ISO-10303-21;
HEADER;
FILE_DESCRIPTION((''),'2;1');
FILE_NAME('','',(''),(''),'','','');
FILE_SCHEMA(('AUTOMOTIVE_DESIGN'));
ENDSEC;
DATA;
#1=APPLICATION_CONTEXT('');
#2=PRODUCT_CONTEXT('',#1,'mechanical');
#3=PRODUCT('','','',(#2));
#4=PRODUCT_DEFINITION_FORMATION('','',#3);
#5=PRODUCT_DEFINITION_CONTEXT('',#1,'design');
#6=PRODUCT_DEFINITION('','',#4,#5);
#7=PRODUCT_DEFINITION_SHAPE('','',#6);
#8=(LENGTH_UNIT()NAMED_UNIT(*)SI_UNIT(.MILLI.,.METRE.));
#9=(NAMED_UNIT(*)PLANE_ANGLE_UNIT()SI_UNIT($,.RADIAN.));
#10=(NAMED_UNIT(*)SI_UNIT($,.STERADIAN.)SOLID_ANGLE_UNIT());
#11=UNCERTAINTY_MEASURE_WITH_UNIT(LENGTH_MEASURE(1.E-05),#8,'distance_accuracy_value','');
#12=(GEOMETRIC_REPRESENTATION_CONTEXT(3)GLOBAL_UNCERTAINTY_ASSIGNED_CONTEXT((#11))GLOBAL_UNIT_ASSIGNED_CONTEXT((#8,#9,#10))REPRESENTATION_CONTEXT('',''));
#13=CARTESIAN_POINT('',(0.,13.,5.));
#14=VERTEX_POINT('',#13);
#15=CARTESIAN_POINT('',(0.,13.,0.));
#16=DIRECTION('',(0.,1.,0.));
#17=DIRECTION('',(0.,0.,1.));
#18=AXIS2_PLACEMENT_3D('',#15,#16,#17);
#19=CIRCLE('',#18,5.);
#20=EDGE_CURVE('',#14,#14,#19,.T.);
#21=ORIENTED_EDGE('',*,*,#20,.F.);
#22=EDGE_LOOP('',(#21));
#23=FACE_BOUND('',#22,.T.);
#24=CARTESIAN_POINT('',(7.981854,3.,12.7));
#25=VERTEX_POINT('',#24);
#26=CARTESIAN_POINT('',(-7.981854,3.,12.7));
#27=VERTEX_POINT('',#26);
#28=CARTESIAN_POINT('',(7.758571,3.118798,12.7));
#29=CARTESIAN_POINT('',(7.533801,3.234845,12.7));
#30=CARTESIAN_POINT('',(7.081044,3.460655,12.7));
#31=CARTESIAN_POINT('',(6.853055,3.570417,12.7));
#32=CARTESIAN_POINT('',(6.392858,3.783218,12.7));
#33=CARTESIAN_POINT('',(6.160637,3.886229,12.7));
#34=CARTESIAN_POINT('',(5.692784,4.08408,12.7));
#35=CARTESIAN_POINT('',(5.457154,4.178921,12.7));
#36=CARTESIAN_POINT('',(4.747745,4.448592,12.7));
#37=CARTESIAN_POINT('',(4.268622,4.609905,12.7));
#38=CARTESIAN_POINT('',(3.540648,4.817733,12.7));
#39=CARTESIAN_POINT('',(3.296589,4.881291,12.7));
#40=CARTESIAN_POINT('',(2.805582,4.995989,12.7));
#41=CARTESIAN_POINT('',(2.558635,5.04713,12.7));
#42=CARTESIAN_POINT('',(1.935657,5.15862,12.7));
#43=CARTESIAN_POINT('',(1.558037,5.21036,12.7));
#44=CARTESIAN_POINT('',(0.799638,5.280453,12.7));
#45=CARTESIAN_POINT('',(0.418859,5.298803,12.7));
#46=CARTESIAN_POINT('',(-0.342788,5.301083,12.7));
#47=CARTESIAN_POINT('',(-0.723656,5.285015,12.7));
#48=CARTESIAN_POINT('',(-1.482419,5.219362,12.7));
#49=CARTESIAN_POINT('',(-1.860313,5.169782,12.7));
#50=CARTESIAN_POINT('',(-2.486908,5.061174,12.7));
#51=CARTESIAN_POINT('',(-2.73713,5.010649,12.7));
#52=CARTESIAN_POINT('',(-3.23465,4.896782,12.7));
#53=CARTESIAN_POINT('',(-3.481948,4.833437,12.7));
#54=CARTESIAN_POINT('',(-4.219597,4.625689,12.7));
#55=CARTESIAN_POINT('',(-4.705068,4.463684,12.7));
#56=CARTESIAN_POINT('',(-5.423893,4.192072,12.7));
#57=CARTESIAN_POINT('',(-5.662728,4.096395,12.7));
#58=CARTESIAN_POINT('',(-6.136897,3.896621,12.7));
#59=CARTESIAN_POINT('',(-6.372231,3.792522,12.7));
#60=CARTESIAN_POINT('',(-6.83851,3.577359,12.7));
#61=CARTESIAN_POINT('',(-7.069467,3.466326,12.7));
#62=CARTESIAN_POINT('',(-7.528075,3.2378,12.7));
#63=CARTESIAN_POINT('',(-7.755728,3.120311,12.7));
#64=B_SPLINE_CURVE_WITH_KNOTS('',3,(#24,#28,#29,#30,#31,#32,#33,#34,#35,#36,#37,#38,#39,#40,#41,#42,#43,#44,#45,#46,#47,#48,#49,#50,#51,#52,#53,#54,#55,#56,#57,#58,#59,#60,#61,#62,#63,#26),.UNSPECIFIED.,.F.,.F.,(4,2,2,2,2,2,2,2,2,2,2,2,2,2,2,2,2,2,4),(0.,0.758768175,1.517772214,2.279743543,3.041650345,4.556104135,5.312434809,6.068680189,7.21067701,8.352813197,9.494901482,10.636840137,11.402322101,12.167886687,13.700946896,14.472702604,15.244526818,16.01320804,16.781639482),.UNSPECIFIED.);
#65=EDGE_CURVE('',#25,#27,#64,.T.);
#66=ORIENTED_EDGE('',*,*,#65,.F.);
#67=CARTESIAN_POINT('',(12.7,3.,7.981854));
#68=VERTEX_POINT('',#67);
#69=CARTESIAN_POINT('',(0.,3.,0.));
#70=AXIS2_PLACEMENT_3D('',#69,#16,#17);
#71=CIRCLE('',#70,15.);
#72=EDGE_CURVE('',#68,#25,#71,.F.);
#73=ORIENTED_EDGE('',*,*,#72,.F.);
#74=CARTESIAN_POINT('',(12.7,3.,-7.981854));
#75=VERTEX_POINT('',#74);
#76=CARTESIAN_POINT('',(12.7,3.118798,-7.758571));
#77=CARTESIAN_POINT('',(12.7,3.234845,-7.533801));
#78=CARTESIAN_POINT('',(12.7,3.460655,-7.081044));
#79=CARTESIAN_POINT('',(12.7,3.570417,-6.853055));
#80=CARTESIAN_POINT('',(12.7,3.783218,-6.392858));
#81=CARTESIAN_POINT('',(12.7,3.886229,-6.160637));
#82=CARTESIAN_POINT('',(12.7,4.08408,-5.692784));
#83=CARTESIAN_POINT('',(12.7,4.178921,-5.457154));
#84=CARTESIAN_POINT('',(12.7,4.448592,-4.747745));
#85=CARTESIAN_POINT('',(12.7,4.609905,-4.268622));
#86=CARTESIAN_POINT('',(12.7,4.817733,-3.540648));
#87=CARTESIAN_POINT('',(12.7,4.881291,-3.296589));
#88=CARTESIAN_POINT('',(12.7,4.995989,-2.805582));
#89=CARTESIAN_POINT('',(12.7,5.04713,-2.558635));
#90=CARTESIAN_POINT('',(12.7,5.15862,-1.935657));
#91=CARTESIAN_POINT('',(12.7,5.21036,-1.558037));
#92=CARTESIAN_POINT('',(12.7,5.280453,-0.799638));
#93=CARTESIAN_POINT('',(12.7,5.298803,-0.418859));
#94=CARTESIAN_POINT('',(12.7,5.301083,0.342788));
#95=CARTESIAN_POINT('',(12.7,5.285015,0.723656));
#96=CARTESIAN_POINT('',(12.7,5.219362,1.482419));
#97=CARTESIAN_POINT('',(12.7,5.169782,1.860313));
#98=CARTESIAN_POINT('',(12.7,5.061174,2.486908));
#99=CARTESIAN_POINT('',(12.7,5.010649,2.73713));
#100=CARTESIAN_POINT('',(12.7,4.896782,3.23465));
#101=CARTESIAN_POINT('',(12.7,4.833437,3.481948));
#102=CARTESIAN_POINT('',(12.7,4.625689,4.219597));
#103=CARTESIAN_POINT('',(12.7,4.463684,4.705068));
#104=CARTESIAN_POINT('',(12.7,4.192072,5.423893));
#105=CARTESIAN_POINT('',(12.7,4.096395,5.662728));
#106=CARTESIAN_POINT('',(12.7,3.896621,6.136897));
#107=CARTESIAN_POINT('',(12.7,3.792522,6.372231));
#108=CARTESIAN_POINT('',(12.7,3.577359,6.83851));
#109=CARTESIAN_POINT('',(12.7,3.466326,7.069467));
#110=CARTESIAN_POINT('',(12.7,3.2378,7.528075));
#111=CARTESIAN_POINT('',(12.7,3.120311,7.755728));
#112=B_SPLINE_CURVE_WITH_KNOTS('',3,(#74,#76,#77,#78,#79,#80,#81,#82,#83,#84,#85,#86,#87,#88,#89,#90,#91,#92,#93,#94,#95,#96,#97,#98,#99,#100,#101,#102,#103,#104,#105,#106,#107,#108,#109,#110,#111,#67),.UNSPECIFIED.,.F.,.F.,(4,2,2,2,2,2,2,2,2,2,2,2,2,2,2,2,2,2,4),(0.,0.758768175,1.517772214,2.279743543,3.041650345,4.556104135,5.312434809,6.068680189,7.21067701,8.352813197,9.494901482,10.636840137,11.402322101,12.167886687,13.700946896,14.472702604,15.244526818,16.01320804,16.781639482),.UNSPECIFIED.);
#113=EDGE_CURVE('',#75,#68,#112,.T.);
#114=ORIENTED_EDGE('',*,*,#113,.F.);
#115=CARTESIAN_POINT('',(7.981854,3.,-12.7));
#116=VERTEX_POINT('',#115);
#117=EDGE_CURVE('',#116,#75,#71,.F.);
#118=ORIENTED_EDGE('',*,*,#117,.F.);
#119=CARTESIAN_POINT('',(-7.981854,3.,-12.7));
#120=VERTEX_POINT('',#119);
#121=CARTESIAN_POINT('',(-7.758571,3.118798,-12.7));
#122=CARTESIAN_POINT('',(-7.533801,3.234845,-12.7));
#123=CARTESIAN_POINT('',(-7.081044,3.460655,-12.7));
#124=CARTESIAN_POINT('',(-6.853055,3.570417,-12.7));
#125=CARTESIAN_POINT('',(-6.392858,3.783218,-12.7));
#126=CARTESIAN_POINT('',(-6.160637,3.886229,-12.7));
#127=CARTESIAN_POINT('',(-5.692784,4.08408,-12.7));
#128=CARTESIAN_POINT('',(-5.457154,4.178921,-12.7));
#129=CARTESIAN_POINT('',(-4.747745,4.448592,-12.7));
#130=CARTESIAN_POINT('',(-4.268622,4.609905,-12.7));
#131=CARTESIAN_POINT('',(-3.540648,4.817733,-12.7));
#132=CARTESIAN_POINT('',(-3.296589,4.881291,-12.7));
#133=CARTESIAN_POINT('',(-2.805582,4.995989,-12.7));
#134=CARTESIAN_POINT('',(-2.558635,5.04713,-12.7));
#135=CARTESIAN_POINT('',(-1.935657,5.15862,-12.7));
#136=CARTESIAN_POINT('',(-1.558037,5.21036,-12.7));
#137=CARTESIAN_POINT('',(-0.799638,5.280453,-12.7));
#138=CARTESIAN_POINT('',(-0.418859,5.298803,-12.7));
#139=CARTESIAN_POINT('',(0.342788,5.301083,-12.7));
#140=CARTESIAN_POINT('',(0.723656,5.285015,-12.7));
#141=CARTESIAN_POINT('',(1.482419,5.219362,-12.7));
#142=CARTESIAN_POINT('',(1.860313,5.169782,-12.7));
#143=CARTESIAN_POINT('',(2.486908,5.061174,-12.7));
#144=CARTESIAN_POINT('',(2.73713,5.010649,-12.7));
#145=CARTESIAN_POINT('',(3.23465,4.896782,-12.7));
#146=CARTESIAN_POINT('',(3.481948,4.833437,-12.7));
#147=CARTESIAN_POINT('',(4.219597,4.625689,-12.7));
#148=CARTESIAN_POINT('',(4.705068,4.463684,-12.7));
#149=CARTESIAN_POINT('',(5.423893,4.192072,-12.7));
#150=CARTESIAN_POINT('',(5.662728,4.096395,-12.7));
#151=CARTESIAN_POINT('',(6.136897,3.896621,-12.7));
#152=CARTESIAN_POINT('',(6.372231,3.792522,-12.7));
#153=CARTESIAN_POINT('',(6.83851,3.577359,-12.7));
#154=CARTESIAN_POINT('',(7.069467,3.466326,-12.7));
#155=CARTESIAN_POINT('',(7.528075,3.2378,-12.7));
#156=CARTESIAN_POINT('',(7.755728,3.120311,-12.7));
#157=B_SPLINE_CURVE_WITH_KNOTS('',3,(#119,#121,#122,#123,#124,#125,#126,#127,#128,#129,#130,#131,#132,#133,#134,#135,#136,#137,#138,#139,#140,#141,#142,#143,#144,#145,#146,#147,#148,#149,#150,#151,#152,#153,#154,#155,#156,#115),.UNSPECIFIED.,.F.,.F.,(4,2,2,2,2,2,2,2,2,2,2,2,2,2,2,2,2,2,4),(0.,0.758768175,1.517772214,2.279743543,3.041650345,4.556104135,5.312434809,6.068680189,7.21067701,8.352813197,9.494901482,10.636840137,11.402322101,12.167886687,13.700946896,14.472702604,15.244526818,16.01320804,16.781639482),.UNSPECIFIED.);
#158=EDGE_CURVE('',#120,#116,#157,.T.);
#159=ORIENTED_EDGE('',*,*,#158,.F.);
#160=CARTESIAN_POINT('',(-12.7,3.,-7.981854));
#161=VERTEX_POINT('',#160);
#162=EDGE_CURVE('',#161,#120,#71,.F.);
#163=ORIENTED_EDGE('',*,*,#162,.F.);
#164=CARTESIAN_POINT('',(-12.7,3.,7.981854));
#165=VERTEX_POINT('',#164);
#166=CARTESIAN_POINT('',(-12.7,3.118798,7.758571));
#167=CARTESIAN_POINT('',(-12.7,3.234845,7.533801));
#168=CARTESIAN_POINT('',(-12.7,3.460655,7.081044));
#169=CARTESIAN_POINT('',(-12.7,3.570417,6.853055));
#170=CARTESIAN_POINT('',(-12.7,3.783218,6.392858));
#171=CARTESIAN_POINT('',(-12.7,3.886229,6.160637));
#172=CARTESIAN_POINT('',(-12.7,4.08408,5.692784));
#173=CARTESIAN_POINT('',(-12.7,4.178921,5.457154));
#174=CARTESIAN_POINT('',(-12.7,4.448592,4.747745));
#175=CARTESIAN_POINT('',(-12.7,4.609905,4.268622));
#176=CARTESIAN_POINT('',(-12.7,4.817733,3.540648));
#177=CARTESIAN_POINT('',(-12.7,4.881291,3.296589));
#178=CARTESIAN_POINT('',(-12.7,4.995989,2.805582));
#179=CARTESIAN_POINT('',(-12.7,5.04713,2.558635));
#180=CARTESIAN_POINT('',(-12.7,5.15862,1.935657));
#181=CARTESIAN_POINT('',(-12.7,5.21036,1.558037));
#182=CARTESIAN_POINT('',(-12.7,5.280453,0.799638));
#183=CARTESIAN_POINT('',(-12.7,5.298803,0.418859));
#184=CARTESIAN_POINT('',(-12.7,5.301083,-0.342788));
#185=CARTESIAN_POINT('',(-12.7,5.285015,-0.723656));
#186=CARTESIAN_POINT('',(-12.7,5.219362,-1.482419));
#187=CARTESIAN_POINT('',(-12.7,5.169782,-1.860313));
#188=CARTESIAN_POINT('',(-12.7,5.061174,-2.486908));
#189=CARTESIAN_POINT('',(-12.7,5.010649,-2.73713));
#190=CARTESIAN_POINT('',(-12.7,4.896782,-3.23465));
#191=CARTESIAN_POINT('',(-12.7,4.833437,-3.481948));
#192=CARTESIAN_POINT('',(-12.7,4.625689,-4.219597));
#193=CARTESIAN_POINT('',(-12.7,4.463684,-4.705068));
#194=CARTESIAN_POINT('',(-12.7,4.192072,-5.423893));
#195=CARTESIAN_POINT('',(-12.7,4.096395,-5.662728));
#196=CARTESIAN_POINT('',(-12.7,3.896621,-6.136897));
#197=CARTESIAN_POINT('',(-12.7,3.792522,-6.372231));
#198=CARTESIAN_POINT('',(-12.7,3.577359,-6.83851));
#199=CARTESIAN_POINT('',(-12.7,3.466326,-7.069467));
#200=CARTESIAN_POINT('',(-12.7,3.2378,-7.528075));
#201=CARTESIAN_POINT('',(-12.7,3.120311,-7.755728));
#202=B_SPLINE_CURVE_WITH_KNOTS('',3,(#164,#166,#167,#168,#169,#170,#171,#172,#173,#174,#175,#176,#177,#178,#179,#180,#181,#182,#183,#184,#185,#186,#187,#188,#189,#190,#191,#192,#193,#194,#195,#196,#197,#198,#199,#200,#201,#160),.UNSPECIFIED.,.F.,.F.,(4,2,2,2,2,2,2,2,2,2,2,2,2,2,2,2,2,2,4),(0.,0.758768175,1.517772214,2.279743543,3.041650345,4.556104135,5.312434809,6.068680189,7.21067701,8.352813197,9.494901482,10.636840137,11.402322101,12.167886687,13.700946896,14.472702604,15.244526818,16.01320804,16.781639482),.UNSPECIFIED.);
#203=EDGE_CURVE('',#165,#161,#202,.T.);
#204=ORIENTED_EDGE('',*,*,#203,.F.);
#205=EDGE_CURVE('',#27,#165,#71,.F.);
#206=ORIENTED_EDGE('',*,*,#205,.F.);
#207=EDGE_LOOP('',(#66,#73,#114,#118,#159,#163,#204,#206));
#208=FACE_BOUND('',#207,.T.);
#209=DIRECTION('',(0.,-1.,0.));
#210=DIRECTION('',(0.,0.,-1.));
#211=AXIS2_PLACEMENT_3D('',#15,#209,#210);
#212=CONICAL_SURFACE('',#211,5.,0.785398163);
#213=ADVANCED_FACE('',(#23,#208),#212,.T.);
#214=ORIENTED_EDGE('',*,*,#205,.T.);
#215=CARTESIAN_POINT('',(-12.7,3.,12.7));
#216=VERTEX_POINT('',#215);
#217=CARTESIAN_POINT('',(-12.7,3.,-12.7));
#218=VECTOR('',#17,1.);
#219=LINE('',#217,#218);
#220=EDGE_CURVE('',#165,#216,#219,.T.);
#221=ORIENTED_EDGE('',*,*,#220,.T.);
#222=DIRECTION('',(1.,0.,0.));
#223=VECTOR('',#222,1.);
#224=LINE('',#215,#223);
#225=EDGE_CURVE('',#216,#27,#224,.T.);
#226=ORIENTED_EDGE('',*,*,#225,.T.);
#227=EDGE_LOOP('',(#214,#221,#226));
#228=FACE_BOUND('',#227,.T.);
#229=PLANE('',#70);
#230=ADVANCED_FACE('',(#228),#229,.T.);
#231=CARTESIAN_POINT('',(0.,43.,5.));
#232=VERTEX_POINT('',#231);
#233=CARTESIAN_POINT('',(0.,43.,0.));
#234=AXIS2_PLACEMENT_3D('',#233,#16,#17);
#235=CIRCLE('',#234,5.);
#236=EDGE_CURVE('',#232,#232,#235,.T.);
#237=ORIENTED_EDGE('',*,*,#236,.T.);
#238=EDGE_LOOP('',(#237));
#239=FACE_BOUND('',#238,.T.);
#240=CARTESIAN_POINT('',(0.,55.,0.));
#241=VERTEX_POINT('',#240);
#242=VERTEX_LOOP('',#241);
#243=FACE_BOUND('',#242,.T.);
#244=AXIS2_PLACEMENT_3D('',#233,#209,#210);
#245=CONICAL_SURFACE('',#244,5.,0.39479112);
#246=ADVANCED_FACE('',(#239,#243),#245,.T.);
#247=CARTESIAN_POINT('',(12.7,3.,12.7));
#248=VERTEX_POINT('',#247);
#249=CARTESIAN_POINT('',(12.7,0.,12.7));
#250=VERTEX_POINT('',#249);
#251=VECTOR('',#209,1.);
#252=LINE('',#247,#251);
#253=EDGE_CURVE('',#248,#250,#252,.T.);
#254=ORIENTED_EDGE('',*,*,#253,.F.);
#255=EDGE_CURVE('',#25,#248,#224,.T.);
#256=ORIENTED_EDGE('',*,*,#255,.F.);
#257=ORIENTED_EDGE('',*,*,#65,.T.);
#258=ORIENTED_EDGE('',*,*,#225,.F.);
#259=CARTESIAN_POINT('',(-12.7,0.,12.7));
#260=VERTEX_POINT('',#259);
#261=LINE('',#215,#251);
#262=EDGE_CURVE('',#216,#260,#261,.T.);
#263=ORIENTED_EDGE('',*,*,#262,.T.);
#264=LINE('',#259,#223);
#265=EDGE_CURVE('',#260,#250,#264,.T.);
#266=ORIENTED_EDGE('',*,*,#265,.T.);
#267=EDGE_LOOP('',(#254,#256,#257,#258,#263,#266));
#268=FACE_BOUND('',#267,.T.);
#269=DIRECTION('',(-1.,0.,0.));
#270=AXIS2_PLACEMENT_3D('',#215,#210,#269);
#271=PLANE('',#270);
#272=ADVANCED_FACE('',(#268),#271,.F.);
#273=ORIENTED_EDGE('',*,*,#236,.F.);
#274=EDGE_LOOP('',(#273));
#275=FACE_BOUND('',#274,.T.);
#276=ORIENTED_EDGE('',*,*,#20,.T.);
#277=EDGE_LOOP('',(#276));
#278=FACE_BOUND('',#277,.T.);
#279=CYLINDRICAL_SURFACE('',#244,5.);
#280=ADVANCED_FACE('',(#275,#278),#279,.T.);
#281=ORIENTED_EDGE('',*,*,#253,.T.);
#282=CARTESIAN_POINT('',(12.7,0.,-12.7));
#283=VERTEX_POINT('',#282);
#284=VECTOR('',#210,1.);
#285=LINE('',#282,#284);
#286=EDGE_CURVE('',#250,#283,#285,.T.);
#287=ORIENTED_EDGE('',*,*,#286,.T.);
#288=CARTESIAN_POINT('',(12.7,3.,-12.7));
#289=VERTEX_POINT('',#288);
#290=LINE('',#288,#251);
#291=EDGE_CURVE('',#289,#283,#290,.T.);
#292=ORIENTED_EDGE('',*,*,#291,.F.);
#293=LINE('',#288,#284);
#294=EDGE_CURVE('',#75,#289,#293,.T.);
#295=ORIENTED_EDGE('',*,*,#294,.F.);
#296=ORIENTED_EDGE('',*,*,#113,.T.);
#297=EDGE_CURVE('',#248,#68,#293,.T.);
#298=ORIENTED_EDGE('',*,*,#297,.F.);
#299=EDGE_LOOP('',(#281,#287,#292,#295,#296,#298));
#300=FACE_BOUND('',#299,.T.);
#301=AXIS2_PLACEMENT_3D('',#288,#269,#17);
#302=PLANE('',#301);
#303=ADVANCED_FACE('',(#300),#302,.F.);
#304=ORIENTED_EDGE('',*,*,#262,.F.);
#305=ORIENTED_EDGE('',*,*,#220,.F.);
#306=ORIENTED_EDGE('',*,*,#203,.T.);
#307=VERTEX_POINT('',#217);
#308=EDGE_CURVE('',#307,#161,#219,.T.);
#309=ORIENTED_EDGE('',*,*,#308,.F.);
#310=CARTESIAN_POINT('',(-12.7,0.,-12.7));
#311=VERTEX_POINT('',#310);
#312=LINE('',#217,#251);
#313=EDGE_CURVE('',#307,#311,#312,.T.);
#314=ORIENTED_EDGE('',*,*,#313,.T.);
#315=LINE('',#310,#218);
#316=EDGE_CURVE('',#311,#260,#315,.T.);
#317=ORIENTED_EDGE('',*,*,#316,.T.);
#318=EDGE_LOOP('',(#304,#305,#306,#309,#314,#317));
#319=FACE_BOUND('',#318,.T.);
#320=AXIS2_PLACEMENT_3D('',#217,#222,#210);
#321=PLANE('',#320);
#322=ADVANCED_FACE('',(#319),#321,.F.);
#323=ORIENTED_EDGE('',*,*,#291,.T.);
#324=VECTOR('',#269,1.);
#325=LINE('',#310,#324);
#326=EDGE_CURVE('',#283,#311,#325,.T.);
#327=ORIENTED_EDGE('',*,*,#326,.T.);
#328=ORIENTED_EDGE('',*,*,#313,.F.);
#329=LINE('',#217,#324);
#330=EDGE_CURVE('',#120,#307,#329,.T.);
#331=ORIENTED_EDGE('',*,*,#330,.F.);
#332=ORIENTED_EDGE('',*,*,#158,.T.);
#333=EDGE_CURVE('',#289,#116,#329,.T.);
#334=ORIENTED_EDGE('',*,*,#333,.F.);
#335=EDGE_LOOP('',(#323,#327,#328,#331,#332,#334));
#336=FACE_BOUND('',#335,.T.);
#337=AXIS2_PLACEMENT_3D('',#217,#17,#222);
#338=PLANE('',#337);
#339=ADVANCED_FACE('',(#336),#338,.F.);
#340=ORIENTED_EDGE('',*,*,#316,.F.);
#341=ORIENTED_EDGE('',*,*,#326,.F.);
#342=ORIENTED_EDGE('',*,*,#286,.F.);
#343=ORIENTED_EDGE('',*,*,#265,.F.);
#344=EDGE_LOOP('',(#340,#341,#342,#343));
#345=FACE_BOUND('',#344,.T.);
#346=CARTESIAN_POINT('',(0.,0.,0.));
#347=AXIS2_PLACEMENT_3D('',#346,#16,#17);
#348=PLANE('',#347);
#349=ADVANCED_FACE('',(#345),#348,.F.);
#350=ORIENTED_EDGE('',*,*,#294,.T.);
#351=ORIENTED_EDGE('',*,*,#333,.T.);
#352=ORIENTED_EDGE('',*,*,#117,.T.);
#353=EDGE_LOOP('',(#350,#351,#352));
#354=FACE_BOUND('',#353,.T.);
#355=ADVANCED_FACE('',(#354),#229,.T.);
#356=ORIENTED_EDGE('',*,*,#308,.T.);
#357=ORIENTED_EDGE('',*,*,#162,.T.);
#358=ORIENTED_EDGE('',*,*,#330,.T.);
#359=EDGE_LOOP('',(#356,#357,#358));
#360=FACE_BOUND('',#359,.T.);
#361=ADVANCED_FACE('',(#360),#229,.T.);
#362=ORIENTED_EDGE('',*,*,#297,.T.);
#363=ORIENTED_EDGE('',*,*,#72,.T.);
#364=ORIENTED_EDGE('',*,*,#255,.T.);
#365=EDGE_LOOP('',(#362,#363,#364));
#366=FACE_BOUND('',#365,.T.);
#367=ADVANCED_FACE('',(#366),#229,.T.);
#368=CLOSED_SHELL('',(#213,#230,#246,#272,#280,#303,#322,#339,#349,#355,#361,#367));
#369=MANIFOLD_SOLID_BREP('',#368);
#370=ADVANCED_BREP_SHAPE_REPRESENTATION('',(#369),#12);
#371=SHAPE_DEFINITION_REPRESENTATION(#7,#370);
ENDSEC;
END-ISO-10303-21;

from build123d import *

# Parameters (mm, degrees)
SKETCH1_W           = 25.4
SKETCH1_H           = 25.4
BOSS_EXTRUDE1_DEPTH = 3
SKETCH2_R           = 5
BOSS_EXTRUDE2_DEPTH = 40
CHAMFER1_SIZE       = 10


with BuildPart() as part:
    # Sketch1 → Boss-Extrude1 (new body)
    with BuildSketch(Plane(origin=(0, 0, 0), x_dir=(1, 0, 0), z_dir=(0, 1, 0))):
        Rectangle(SKETCH1_W, SKETCH1_H)
    extrude(amount=BOSS_EXTRUDE1_DEPTH)

    # Sketch2 → Boss-Extrude2 (add)
    with BuildSketch(Plane(origin=(0, 3, 0), x_dir=(1, 0, 0), z_dir=(0, 1, 0))):
        with Locations(Location((0, 0, 0), (0, 0, 270))):
            Circle(SKETCH2_R)
    extrude(amount=BOSS_EXTRUDE2_DEPTH)

    # Chamfer1
    # the kernel refuses this chamfer: 10 mm, written as the material it adds along each edge
    with BuildSketch(Plane(origin=(0, 3, 0), x_dir=(0, 0, 1), z_dir=(-1, 0, 0))) as chamfer1_piece_1_section:
        Polygon((5 + CHAMFER1_SIZE, 0), (5, CHAMFER1_SIZE), (5, 0), align=None)
    chamfer1_piece_1 = revolve(axis=Axis((0, 3, 0), (0, 1, 0)), mode=Mode.PRIVATE)
    chamfer1_piece_1 = split(chamfer1_piece_1, bisect_by=Plane(origin=(0, 7.901138133, -12.7), z_dir=(0, 0, 1)), keep=Keep.TOP, mode=Mode.PRIVATE)
    chamfer1_piece_1 = split(chamfer1_piece_1, bisect_by=Plane(origin=(-12.7, 7.901138133, -9.901138133), z_dir=(1, 0, 0)), keep=Keep.TOP, mode=Mode.PRIVATE)
    chamfer1_piece_1 = split(chamfer1_piece_1, bisect_by=Plane(origin=(12.7, 7.901138133, -9.901138133), z_dir=(-1, 0, 0)), keep=Keep.TOP, mode=Mode.PRIVATE)
    chamfer1_piece_1 = split(chamfer1_piece_1, bisect_by=Plane(origin=(0, 7.901138133, 12.7), z_dir=(0, 0, -1)), keep=Keep.TOP, mode=Mode.PRIVATE)
    add(chamfer1_piece_1)

    # Sketch3 → Revolve1 (revolve)
    with BuildSketch(Plane(origin=(0, 0, 0), x_dir=(0, 0, -1), z_dir=(1, 0, 0)), mode=Mode.PRIVATE) as revolve1_sk:
        Polygon((0, 55), (0, 43), (5, 43), align=None)
    revolve(revolve1_sk.sketch.rotate(Axis((0, 0, 0), (0, 1, 0)), 327.850947574), axis=Axis((0, 0, 0), (0, 1, 0)))


solid = part.part
